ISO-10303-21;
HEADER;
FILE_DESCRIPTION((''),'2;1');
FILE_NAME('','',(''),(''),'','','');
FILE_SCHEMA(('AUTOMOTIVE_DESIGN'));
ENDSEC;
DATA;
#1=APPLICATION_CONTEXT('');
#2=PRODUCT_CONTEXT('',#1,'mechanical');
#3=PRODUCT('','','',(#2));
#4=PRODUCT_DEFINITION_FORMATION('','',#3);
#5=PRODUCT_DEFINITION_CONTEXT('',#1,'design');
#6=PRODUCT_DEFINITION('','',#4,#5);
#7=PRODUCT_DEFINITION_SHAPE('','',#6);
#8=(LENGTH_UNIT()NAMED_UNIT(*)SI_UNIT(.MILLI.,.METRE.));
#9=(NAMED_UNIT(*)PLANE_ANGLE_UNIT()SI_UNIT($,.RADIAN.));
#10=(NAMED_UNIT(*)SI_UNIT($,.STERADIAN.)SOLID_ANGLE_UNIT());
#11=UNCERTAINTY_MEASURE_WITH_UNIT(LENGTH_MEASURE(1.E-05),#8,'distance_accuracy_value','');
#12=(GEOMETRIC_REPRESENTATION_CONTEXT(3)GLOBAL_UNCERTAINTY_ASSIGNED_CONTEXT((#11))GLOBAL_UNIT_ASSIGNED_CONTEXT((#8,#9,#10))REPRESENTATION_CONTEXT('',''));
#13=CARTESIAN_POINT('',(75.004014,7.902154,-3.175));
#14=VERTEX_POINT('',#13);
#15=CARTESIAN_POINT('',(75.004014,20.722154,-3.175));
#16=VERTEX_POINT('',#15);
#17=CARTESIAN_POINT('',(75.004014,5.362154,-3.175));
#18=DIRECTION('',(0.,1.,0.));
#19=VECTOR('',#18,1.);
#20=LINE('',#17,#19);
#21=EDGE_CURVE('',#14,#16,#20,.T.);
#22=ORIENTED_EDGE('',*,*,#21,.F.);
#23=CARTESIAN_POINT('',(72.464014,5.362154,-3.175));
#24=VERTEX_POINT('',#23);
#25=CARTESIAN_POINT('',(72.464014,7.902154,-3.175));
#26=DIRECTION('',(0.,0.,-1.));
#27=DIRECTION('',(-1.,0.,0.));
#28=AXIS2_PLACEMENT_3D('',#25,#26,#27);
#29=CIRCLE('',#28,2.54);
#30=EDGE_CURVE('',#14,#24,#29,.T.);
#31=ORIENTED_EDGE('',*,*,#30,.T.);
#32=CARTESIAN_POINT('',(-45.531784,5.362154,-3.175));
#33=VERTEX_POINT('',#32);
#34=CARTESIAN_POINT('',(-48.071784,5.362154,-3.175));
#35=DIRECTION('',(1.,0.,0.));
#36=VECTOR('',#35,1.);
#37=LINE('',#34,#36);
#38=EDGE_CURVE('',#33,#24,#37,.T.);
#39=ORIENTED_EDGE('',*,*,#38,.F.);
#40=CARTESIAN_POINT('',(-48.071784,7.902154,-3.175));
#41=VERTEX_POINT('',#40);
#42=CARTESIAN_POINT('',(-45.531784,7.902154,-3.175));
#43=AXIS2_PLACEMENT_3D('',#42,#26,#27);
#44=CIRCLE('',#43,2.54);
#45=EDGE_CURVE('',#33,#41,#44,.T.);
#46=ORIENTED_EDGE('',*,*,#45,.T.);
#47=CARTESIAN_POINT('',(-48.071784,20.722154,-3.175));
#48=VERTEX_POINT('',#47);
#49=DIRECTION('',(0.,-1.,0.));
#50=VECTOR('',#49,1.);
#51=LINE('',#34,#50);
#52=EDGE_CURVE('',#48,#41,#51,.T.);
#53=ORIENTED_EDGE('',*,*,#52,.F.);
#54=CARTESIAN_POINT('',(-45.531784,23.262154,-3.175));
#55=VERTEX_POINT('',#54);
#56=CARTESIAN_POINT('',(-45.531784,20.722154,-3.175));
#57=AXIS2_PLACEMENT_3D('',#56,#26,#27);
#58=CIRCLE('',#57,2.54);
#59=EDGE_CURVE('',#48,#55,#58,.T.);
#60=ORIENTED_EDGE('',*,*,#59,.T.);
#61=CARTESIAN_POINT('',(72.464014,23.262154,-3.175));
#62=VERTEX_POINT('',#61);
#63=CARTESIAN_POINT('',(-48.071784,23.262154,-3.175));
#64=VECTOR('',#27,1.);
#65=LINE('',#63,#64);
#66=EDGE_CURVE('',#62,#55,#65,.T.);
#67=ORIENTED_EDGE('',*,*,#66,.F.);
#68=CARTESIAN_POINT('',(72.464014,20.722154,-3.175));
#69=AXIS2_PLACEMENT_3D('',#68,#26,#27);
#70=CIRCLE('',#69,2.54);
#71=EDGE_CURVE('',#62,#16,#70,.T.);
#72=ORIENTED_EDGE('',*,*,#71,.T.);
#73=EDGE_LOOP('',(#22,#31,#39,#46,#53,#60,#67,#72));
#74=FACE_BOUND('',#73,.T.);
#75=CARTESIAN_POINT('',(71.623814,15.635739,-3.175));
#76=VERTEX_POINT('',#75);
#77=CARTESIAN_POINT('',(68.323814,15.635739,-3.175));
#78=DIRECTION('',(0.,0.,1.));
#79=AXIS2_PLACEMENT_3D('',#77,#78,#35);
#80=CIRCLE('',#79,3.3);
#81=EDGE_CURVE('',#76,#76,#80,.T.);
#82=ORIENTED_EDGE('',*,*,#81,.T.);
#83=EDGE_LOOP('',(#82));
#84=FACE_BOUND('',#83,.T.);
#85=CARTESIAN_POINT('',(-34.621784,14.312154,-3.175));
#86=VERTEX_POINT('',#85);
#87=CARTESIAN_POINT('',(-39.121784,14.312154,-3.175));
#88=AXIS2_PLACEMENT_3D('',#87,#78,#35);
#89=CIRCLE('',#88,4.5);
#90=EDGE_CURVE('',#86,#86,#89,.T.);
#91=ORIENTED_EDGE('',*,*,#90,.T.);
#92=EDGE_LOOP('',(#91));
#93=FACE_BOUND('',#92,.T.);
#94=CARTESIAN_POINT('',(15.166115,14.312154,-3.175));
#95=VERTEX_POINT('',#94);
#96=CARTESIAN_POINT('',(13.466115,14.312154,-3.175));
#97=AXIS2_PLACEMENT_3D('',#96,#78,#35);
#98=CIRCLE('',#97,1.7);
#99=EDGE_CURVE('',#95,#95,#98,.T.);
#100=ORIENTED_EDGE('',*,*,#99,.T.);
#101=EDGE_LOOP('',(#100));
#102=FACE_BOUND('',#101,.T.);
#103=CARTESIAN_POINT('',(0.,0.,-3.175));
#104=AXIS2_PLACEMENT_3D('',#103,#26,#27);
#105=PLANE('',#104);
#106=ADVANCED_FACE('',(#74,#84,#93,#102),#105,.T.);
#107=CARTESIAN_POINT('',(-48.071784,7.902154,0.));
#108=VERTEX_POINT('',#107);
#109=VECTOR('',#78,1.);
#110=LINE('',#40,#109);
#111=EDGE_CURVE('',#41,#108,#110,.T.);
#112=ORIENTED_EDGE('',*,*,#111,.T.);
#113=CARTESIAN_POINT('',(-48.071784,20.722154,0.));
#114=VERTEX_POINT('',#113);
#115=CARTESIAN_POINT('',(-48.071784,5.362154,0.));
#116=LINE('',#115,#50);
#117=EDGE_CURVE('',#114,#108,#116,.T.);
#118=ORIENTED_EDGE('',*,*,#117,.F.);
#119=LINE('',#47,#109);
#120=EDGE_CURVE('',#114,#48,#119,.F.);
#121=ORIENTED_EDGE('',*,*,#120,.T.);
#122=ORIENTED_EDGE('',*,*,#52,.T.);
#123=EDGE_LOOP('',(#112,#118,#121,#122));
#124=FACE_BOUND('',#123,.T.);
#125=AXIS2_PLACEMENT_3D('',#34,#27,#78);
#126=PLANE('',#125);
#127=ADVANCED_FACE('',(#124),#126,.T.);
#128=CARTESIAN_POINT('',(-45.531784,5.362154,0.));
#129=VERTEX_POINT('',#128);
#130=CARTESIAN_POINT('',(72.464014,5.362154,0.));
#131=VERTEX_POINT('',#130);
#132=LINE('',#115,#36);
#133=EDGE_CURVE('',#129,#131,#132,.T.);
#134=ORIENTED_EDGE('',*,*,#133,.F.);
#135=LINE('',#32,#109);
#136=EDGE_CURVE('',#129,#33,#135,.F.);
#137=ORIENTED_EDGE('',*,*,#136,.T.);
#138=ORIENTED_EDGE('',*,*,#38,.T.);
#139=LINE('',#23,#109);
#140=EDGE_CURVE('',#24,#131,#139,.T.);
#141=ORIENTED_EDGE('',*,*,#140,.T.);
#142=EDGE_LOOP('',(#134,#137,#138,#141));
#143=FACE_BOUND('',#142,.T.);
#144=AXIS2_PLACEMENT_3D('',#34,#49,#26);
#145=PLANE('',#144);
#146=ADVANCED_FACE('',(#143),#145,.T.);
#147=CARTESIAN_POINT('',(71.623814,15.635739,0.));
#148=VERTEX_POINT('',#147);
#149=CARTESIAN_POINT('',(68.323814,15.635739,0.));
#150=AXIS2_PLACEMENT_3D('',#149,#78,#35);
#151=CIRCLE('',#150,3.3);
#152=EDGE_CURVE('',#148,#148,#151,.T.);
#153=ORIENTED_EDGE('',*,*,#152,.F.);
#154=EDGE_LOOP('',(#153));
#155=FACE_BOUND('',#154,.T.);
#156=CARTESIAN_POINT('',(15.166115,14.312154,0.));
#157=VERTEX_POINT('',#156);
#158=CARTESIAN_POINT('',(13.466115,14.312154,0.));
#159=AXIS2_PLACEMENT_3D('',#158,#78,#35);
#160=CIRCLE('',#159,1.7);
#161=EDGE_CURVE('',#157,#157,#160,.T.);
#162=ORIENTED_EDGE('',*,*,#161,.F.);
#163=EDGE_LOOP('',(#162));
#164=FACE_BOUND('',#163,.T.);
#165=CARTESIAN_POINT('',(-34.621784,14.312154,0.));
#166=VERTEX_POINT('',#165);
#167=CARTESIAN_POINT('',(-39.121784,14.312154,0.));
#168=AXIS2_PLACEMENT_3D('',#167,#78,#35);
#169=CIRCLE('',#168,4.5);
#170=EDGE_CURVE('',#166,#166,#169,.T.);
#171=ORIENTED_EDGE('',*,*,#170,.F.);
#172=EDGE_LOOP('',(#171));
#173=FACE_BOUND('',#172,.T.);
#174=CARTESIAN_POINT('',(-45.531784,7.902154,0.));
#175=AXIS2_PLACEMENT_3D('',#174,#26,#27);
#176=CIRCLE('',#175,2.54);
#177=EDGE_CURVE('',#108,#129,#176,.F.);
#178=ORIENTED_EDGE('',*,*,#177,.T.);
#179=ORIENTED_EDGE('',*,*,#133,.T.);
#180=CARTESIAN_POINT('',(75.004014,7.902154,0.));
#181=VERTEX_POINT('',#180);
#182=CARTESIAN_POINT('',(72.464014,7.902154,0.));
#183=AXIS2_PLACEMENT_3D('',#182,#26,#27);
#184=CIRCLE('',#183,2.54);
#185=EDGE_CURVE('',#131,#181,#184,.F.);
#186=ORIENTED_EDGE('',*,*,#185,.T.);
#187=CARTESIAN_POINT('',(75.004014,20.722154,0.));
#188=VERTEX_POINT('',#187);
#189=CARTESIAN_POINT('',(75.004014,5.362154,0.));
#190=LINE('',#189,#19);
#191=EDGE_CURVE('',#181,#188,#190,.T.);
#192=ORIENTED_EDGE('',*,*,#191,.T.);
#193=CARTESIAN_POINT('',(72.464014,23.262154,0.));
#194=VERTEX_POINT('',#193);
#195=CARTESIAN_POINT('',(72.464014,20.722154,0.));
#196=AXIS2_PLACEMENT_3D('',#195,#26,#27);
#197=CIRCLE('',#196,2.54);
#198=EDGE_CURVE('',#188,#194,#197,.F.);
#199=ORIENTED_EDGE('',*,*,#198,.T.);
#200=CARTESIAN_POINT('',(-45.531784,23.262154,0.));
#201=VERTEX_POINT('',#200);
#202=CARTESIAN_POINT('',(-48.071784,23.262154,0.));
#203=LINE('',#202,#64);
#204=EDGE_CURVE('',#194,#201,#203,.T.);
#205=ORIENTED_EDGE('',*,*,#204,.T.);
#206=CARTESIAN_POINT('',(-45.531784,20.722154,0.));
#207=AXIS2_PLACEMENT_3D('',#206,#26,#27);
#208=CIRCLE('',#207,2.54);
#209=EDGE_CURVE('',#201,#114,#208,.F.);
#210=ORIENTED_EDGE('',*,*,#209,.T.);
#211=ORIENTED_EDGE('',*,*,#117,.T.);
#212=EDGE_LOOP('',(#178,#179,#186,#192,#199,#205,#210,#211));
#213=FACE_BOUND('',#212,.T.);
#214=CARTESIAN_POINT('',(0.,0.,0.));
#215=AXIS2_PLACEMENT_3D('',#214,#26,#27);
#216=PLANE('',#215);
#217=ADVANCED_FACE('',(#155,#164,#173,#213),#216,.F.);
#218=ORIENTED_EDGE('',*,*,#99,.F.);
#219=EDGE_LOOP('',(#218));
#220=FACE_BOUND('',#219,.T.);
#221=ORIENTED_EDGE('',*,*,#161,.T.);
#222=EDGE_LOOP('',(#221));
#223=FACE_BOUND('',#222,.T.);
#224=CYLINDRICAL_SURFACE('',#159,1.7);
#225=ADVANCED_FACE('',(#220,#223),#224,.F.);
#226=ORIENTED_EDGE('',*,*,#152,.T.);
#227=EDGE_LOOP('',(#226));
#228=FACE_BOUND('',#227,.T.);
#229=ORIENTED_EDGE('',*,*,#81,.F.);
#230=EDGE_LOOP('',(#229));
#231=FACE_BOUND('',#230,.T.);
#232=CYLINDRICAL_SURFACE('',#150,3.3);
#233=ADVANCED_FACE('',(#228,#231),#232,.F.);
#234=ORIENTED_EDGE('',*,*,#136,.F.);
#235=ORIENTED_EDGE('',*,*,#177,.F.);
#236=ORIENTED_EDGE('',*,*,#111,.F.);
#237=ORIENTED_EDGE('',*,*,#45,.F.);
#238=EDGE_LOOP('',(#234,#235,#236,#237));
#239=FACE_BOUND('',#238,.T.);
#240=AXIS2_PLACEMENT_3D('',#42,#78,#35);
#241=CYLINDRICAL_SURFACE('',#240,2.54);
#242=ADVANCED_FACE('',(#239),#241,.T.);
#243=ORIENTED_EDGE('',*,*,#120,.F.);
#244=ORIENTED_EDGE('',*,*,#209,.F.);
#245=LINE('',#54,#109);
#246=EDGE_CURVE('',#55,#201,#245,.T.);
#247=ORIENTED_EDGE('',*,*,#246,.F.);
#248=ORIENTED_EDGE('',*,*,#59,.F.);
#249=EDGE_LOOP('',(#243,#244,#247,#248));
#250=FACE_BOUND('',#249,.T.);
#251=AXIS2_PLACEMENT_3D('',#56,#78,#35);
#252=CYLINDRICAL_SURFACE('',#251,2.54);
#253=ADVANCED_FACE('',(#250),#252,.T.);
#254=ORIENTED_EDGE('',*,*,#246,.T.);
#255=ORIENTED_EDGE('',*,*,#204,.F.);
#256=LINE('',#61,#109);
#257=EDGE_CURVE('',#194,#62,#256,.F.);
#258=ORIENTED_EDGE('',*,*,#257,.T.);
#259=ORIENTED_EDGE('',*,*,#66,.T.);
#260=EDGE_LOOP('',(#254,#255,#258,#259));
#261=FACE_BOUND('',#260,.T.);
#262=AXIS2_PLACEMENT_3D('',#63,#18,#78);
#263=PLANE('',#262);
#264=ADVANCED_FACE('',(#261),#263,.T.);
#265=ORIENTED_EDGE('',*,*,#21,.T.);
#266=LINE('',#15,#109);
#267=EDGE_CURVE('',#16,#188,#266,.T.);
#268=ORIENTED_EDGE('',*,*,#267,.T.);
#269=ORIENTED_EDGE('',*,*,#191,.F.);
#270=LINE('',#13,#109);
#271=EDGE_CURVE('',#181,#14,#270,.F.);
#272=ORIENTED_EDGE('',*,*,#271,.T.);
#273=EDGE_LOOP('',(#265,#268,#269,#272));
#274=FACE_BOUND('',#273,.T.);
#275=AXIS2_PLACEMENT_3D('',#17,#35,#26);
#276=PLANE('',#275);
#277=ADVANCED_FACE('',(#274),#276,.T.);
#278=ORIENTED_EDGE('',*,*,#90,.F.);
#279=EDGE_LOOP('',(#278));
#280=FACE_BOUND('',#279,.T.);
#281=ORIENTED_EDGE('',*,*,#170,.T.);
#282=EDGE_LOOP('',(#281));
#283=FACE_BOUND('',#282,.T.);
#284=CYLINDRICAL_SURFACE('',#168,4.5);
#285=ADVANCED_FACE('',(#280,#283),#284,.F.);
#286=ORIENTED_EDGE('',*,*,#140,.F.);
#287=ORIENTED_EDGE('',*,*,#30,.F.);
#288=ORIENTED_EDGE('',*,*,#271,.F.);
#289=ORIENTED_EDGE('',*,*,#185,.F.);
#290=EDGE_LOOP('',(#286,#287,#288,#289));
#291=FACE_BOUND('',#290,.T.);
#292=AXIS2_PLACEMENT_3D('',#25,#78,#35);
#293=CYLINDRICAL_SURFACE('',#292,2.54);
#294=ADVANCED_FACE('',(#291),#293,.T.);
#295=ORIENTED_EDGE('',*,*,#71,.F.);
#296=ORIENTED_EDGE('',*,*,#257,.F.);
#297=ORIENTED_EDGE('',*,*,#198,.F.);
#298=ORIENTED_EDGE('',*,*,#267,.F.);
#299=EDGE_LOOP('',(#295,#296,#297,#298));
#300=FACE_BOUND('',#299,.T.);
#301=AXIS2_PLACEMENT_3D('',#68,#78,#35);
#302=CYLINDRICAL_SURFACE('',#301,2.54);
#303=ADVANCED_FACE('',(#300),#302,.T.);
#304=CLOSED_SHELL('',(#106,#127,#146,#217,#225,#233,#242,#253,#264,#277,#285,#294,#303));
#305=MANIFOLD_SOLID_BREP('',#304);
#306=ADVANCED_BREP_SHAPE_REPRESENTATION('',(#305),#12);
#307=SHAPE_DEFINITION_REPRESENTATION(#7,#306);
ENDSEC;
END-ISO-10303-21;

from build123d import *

# Parameters (mm, degrees)
SKETCH1_W            = 123.075797847
SKETCH1_H            = 17.9
SKETCH1_R            = 2
SKETCH1_R_2          = 2.54
BASE_FLANGE1_DEPTH   = 3.175
FILLET1_R            = 2.54
M8_CLEARANCE_HOLE1_D = 9
M6_CLEARANCE_HOLE1_D = 6.6
SKETCH10_R           = 1
CUT_EXTRUDE1_DEPTH   = 79.592687586
M3_CLEARANCE_HOLE2_D = 3.4


# Sheet-metal steps are written as plain solids
with BuildPart() as part:
    # Sketch1 → Base-Flange1 (new body)
    with BuildSketch(Plane.XY):
        with Locations((13.466115103, 14.312153748)):
            Rectangle(SKETCH1_W, SKETCH1_H)
        with Locations((-39.121783821, 14.312153748)):
            Circle(SKETCH1_R, mode=Mode.SUBTRACT)
        with Locations((68.323814026, 15.635739427)):
            Circle(SKETCH1_R_2, mode=Mode.SUBTRACT)
    extrude(amount=-BASE_FLANGE1_DEPTH)

    # Fillet1
    fillet1_edges = [part.edges().sort_by_distance(p)[0] for p in [
        (-48.071783821, 23.262153748, -1.5875),
        (75.004014026, 23.262153748, -1.5875),
        (75.004014026, 5.362153748, -1.5875),
        (-48.071783821, 5.362153748, -1.5875),
    ]]
    fillet(fillet1_edges, radius=FILLET1_R)

    # M8 Clearance Hole1 (through all)
    with Locations(Plane.XY):
        with Locations((-39.121783821, 14.312153748)):
            Hole(M8_CLEARANCE_HOLE1_D / 2)

    # M6 Clearance Hole1 (through all)
    with Locations(Plane.XY):
        with Locations((68.323814026, 15.635739427)):
            Hole(M6_CLEARANCE_HOLE1_D / 2)

    # Sketch10 → Cut-Extrude1 (cut, through all)
    with BuildSketch(Plane.XY):
        with Locations((13.466115103, 14.312153748)):
            Circle(SKETCH10_R)
    extrude(amount=-CUT_EXTRUDE1_DEPTH, mode=Mode.SUBTRACT)

    # M3 Clearance Hole2 (through all)
    with Locations(Plane.XY):
        with Locations((13.466115103, 14.312153748)):
            Hole(M3_CLEARANCE_HOLE2_D / 2)


solid = part.part
